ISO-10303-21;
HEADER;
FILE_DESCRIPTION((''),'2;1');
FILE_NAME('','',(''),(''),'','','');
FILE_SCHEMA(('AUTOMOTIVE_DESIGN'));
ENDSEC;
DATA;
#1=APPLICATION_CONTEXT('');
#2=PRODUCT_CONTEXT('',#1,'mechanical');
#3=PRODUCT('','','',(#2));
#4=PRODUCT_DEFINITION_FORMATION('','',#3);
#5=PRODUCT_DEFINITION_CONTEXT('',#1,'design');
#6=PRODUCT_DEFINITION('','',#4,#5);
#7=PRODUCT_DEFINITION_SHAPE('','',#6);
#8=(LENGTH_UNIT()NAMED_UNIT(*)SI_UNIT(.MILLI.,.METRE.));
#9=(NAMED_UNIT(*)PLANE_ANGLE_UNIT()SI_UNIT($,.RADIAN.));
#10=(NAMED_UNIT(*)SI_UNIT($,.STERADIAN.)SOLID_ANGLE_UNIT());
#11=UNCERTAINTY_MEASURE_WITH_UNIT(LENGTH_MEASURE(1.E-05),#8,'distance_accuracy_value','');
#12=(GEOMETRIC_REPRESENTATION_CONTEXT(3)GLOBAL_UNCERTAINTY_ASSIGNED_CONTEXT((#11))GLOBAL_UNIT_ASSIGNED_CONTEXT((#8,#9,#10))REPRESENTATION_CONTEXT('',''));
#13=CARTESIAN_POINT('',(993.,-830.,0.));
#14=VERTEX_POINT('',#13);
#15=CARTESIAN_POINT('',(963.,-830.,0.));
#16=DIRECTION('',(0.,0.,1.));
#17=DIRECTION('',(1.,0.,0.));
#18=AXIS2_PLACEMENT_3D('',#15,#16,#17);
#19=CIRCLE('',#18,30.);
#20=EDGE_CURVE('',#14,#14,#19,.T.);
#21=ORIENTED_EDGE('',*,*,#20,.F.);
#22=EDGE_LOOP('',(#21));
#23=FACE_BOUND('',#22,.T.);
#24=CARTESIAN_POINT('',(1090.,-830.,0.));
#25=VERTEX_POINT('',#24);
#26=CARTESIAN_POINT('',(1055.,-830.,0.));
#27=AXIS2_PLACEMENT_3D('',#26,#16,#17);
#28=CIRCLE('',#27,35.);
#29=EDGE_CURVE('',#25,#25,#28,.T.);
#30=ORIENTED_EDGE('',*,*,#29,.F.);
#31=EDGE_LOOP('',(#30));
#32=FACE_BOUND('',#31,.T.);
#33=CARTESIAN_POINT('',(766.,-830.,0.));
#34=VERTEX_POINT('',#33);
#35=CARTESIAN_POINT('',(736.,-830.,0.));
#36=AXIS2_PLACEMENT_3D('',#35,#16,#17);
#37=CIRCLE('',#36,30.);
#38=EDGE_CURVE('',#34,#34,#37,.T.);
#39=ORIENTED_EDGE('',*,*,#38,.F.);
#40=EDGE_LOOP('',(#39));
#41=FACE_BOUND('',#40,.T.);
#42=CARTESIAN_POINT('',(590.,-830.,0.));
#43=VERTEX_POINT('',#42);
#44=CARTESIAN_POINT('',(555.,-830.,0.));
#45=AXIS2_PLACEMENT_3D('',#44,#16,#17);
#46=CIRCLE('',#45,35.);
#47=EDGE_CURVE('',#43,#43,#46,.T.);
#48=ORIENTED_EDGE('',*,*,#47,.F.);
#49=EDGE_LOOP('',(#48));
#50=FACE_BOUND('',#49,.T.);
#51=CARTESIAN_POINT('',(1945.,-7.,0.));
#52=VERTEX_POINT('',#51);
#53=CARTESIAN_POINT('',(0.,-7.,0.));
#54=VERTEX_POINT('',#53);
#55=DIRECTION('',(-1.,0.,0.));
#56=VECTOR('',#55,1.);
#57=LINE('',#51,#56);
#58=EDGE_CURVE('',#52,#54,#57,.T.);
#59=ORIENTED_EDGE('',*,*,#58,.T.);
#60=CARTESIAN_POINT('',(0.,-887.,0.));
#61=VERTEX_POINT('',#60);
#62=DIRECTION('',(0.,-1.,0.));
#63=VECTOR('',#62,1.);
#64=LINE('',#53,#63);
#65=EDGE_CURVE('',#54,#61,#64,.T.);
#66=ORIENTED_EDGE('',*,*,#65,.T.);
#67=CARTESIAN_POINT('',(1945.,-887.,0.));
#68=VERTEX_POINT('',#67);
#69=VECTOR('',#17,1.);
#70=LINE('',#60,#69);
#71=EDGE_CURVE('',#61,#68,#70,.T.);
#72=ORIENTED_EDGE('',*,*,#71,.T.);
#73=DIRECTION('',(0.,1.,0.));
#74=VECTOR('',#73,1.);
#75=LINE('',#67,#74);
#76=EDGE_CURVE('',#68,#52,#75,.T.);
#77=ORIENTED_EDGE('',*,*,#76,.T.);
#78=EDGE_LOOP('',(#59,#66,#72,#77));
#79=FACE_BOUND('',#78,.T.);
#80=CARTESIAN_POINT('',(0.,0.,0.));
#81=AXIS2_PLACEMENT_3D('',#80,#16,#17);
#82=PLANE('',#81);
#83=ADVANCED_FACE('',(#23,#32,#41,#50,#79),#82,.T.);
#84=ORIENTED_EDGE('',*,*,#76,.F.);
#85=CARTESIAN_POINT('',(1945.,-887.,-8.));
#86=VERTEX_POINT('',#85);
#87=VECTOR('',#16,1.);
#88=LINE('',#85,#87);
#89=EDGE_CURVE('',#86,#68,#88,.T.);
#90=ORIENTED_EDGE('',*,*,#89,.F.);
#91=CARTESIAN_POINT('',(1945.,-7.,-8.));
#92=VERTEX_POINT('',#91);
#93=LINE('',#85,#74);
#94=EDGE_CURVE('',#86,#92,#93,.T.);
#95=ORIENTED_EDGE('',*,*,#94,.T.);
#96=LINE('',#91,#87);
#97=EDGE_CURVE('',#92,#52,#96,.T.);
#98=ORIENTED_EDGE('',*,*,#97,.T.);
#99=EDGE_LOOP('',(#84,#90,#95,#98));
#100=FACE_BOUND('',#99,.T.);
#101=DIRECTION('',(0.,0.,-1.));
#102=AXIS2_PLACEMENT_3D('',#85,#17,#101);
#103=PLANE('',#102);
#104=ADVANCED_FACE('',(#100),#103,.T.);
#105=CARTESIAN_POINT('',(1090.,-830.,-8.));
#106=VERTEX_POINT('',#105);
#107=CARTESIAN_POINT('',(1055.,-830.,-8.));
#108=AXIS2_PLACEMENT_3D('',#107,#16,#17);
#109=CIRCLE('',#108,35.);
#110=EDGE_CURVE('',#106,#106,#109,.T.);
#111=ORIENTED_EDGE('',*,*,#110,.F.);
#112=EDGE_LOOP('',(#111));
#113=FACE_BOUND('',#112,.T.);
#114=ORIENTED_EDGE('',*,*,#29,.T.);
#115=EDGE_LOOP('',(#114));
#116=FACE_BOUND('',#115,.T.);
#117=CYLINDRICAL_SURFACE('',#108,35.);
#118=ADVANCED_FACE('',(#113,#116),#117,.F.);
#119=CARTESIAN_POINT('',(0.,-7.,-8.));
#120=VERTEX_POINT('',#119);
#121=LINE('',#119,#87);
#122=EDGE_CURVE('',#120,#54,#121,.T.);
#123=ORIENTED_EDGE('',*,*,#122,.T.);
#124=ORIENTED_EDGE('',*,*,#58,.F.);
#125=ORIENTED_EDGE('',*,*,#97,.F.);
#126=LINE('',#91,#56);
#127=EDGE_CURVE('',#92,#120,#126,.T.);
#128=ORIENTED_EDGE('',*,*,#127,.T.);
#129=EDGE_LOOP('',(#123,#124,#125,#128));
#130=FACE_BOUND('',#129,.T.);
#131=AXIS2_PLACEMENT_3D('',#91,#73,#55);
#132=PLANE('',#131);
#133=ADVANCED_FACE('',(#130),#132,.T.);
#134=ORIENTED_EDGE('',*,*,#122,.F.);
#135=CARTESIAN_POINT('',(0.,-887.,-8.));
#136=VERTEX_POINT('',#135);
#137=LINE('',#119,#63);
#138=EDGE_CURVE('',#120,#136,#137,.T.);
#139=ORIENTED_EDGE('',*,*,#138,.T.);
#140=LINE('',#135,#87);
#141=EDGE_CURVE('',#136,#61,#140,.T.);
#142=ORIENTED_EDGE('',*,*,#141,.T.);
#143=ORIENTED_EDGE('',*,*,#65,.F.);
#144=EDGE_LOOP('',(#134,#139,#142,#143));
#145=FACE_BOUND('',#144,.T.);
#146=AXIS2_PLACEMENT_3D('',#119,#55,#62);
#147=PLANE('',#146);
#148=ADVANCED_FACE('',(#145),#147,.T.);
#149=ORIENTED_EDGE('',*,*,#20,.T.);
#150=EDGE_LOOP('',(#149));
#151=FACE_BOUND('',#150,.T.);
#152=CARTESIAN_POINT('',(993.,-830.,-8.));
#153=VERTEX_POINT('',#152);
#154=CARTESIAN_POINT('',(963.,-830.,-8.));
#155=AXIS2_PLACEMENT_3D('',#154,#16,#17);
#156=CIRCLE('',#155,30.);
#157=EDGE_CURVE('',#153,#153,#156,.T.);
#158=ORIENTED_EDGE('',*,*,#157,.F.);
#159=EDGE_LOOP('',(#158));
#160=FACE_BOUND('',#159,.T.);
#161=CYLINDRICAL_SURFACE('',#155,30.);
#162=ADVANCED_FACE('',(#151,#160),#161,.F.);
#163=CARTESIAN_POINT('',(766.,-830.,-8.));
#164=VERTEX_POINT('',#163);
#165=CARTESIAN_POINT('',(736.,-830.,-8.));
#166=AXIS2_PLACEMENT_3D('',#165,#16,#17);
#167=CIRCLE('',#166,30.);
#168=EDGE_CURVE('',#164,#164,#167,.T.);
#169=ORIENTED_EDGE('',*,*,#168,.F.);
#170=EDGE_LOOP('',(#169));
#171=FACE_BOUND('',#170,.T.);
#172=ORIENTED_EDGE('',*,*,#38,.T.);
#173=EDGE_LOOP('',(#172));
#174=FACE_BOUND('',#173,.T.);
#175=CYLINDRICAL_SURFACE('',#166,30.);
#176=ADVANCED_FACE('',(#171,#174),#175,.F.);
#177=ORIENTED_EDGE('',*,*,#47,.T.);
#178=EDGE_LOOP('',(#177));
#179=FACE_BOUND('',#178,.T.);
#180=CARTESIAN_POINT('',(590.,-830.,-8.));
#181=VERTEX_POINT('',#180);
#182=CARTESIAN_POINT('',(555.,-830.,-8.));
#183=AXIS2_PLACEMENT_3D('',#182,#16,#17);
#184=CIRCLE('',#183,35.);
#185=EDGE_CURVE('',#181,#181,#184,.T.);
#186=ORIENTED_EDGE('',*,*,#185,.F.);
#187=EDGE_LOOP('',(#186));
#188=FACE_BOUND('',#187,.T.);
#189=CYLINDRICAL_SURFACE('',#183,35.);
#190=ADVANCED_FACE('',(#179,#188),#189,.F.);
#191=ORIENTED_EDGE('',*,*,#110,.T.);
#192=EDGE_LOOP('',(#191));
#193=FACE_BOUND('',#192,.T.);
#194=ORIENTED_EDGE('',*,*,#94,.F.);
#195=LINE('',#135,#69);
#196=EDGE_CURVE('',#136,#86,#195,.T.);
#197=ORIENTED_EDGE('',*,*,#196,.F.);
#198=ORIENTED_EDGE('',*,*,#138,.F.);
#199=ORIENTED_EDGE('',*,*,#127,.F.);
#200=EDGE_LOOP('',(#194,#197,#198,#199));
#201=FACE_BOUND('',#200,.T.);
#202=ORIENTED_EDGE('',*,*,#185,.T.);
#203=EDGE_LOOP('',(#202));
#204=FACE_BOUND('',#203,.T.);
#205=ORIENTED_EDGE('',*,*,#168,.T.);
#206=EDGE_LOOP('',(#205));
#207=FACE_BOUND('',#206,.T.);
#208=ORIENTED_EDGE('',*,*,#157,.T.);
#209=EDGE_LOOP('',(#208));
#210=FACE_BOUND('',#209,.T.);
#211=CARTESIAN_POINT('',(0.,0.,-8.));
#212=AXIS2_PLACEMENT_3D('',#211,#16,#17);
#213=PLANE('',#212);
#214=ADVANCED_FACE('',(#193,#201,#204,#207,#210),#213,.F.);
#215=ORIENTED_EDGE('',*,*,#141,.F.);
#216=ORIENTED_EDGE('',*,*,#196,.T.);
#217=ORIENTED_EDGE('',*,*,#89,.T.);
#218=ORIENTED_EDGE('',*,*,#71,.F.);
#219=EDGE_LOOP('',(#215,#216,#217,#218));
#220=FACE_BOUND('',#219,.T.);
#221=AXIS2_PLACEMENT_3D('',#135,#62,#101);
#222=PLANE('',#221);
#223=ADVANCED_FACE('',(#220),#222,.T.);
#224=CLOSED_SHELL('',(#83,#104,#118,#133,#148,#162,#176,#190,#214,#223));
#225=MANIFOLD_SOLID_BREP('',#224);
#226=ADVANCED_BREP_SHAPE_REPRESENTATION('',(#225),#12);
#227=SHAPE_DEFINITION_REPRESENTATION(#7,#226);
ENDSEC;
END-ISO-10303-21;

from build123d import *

# Parameters (mm, degrees)
IZIM1_W            = 1945
IZIM1_H            = 880
IZIM1_R            = 35
IZIM1_R_2          = 30
TABAN_FLAN_1_DEPTH = 8


# Sheet-metal steps are written as plain solids
with BuildPart() as part:
    # Çizim1 → Taban-Flanş1 (new body)
    with BuildSketch(Plane.XY):
        with Locations((972.5, -447)):
            Rectangle(IZIM1_W, IZIM1_H)
        with Locations((555, -830)):
            Circle(IZIM1_R, mode=Mode.SUBTRACT)
        with Locations((736, -830)):
            Circle(IZIM1_R_2, mode=Mode.SUBTRACT)
        with Locations((963, -830)):
            Circle(IZIM1_R_2, mode=Mode.SUBTRACT)
        with Locations((1055, -830)):
            Circle(IZIM1_R, mode=Mode.SUBTRACT)
    extrude(amount=-TABAN_FLAN_1_DEPTH)


solid = part.part
